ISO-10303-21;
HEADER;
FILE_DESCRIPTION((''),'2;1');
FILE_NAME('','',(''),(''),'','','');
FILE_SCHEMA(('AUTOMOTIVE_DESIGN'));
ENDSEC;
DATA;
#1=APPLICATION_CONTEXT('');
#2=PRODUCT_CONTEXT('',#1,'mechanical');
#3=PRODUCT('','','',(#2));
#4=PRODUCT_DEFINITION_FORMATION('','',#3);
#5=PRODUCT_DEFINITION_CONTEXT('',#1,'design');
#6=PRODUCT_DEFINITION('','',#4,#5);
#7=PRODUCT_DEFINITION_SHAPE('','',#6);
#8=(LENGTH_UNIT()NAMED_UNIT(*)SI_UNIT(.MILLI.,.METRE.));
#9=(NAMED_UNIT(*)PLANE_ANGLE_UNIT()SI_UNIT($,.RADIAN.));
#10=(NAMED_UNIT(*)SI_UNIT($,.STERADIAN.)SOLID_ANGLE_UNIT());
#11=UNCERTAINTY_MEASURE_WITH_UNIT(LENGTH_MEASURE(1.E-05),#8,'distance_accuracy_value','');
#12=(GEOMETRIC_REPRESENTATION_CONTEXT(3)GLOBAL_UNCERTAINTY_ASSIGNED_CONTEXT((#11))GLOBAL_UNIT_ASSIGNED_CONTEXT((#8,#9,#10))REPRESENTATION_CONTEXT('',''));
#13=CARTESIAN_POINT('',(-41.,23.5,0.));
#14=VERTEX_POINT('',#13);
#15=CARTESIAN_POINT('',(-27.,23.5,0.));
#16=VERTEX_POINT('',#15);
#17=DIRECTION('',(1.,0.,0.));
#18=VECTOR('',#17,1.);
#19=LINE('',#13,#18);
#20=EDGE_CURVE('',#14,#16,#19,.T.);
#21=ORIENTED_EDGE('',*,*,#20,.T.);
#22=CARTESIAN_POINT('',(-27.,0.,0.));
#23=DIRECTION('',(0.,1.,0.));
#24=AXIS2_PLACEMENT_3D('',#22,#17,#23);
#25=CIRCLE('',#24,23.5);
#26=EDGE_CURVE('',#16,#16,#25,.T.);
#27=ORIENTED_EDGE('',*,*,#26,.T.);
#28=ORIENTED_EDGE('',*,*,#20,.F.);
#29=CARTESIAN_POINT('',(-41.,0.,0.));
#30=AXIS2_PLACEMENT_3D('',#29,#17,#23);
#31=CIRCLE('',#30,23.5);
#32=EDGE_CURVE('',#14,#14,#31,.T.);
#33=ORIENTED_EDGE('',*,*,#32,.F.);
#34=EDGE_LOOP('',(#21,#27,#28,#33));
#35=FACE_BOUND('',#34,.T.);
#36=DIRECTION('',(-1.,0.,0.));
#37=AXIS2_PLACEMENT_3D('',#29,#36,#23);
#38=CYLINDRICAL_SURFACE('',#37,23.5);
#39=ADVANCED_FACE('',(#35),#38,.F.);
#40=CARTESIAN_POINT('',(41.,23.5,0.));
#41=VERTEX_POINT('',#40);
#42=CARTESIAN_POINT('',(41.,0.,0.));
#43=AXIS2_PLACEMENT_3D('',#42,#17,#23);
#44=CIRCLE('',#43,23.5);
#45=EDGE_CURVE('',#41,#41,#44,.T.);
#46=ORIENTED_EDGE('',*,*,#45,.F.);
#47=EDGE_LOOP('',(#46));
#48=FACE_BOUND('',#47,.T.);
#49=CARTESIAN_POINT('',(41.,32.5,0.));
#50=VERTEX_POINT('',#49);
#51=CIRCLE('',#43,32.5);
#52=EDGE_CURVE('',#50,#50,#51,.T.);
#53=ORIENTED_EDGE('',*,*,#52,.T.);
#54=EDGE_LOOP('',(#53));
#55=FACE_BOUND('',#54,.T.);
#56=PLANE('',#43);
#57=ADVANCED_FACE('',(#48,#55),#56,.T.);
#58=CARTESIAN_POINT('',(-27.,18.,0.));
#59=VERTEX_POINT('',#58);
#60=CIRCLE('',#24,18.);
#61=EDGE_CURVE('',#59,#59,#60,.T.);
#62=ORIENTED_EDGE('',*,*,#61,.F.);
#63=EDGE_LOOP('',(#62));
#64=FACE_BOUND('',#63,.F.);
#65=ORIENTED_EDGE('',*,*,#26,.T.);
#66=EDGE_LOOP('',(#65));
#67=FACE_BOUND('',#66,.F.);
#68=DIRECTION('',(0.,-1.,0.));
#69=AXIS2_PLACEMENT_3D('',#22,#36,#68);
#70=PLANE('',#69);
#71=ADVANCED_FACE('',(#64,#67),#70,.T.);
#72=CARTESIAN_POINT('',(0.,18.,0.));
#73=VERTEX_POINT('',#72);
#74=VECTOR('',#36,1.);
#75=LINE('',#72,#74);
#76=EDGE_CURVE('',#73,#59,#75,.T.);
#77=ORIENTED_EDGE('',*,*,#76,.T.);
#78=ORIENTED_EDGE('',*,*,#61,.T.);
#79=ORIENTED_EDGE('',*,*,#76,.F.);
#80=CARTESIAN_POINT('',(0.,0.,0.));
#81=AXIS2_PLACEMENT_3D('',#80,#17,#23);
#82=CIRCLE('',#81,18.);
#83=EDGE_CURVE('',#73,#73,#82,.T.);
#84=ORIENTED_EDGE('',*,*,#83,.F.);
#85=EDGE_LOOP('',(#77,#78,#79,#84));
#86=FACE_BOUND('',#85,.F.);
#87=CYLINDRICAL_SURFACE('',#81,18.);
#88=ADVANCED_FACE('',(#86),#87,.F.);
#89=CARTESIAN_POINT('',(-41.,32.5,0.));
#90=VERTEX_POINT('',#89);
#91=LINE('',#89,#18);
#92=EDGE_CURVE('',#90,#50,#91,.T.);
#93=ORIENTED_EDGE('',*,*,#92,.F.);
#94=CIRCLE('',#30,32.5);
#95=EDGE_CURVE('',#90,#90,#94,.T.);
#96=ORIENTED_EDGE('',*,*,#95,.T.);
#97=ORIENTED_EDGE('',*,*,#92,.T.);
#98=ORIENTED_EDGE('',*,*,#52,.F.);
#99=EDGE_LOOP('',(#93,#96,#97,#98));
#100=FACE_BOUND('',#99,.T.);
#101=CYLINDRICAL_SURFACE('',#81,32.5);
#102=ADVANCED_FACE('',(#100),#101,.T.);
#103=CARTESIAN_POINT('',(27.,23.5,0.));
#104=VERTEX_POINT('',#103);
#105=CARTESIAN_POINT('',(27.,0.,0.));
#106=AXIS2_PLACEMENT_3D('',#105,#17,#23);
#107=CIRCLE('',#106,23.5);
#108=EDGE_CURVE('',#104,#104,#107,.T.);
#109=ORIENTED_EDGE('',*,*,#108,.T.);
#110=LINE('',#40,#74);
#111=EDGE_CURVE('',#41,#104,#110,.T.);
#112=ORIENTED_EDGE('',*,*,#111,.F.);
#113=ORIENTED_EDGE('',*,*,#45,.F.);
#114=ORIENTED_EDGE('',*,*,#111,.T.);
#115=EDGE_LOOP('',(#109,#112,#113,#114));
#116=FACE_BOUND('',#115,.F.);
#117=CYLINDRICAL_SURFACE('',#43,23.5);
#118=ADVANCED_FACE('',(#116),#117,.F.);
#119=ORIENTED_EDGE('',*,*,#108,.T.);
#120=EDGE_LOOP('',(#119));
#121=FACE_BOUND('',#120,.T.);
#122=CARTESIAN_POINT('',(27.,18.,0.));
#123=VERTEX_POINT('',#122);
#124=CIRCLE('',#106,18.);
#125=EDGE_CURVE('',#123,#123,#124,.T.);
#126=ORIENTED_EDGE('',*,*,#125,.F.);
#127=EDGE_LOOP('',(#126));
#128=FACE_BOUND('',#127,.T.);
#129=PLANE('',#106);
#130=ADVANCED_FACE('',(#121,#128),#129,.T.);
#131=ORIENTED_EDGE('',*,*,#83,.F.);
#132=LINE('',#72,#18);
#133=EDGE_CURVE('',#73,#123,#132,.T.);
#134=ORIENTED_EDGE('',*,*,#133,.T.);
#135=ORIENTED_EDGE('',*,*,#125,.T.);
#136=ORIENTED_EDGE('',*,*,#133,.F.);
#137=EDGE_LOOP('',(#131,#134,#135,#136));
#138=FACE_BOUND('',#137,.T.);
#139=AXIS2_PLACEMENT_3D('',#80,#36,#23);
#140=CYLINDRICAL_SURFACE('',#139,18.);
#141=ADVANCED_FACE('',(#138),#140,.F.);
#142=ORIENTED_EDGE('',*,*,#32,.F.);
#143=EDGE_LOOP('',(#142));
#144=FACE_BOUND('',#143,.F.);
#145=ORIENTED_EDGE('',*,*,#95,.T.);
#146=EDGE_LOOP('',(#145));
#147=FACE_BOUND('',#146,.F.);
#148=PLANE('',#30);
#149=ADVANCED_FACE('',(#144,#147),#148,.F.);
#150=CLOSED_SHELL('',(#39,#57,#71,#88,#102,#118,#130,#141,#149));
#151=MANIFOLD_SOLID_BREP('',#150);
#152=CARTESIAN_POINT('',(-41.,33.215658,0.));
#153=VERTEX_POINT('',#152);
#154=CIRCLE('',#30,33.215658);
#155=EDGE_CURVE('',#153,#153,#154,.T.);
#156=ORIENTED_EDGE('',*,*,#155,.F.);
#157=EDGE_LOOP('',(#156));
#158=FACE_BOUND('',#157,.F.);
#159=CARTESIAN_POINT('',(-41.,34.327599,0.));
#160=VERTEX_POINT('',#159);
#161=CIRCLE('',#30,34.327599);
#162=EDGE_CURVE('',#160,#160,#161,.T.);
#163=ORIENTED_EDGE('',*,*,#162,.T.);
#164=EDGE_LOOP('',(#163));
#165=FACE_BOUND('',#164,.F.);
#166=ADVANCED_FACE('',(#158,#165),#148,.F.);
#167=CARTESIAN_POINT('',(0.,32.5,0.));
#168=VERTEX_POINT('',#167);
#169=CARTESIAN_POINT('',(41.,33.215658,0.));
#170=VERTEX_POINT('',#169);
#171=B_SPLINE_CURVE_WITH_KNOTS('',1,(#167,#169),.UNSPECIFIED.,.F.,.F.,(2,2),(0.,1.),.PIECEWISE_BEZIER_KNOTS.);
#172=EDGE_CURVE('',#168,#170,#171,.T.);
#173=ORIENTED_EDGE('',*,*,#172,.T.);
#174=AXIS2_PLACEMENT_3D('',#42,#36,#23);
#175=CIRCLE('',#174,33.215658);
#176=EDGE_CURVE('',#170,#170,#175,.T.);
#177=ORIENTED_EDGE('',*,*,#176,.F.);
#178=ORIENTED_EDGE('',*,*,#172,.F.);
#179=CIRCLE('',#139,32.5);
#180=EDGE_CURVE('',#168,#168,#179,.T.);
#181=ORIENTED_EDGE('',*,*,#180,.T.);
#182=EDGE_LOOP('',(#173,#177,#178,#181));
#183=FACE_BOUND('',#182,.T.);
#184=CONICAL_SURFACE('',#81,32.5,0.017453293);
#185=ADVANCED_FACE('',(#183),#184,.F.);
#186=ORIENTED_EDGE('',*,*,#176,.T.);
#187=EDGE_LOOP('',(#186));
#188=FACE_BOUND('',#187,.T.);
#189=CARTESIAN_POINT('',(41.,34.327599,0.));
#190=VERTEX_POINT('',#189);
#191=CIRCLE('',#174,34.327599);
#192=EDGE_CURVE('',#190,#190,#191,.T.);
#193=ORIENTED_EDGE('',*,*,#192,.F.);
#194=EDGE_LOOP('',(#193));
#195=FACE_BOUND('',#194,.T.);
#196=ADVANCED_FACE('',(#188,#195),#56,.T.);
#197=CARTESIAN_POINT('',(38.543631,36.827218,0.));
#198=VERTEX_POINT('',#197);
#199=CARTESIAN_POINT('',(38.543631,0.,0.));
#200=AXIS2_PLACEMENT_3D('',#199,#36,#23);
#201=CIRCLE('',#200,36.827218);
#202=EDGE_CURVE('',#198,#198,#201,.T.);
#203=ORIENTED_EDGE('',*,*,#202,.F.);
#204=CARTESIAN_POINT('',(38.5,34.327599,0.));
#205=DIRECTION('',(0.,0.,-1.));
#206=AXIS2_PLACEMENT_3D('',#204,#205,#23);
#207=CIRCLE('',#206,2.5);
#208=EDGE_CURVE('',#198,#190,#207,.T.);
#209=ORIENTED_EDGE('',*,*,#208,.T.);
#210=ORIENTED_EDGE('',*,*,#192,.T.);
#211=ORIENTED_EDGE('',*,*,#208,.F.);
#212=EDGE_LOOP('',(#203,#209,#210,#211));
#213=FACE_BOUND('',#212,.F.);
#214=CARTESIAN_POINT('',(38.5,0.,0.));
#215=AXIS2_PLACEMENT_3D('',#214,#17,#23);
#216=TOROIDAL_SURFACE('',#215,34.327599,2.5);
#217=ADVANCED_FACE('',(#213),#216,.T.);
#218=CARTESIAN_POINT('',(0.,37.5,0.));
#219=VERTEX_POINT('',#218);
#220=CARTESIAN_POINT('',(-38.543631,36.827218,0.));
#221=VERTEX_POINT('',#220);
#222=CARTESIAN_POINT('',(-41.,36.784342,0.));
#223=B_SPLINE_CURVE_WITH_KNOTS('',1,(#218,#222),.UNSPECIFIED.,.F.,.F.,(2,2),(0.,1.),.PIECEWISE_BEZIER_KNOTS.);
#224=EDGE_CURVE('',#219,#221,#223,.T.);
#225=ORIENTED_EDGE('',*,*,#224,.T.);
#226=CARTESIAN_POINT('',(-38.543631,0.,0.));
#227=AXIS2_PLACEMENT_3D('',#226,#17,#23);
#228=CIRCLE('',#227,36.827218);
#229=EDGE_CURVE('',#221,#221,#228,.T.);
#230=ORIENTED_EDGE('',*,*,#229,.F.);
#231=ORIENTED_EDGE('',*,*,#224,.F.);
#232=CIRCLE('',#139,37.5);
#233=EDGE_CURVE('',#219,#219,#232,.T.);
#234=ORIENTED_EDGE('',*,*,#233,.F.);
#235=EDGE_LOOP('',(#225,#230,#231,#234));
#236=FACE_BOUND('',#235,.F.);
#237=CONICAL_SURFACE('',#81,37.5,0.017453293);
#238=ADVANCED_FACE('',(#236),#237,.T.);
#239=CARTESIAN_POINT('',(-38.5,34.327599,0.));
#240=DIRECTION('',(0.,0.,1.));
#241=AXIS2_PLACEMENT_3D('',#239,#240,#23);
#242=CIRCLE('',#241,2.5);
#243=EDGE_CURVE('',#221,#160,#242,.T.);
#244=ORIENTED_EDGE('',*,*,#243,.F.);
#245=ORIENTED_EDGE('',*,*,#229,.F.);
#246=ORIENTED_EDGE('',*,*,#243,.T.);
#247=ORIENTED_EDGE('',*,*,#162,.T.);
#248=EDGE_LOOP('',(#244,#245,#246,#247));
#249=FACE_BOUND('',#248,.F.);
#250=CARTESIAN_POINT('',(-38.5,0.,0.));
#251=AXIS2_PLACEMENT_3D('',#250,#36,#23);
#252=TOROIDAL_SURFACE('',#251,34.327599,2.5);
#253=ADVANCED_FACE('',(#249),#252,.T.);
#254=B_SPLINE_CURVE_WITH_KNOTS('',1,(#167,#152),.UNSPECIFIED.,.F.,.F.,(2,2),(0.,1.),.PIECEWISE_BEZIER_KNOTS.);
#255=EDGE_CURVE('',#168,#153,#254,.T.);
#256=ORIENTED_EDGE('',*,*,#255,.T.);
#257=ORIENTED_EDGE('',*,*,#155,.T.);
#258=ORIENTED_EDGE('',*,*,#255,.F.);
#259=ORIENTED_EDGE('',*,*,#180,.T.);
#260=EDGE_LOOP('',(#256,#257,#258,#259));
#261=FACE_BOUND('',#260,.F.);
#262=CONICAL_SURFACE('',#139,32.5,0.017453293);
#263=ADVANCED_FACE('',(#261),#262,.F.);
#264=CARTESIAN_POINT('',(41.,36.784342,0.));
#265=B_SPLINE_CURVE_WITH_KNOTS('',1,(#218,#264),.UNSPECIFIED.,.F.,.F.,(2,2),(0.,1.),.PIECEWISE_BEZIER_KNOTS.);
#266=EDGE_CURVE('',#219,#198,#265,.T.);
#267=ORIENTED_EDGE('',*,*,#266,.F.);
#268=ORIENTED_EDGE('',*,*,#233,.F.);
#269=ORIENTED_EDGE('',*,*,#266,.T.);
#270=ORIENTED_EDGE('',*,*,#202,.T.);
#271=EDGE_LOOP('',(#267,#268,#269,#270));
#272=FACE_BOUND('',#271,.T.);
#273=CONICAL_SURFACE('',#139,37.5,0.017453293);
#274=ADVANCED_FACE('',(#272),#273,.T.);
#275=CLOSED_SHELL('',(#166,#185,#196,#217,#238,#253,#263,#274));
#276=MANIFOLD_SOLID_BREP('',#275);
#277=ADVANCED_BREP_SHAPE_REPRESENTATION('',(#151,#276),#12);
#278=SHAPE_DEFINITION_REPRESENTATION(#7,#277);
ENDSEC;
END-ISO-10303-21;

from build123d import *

# Parameters (mm, degrees)
F0_R          = 37.5
F0_R_2        = 32.5
F1_DEPTH      = 41
F1_TAPER      = 1
F2_R          = 2.5
F3_DEPTH      = 41
F4_R          = 23.5
F5_DEPTH      = 14
F7_R          = 18
F8_DEPTH      = 27
F8_DEPTH_BACK = 27


with BuildPart() as f1:
    # F0 (on Right) → F1 (new body, symmetric)
    with BuildSketch(Plane.YZ):
        Circle(F0_R)
        Circle(F0_R_2, mode=Mode.SUBTRACT)
    extrude(amount=F1_DEPTH, both=True, taper=F1_TAPER)

    # F2
    f2_edges = [f1.edges().sort_by_distance(p)[0] for p in [
        (41, -36.784342, 0),
        (-41, -36.784342, 0),
    ]]
    fillet(f2_edges, radius=F2_R)


with BuildPart() as f3:
    # F0 (on Right) → F3 (new body, symmetric)
    with BuildSketch(Plane.YZ):
        Circle(F0_R_2)
    extrude(amount=F3_DEPTH, both=True)

    # F4 (on face) → F5 (cut)
    with BuildSketch(Plane.YZ.offset(41)):
        Circle(F4_R)
    f5 = extrude(amount=-F5_DEPTH, mode=Mode.SUBTRACT)

    # F6: F5 across plane
    add(f5.mirror(Plane.YZ), mode=Mode.SUBTRACT)

    # F7 (on Right) → F8 (cut, two sides)
    with BuildSketch(Plane.YZ) as f8_sk:
        Circle(F7_R)
    extrude(amount=-F8_DEPTH, mode=Mode.SUBTRACT)
    extrude(f8_sk.sketch, amount=F8_DEPTH_BACK, mode=Mode.SUBTRACT)


solid = Compound([f1.part, f3.part])
